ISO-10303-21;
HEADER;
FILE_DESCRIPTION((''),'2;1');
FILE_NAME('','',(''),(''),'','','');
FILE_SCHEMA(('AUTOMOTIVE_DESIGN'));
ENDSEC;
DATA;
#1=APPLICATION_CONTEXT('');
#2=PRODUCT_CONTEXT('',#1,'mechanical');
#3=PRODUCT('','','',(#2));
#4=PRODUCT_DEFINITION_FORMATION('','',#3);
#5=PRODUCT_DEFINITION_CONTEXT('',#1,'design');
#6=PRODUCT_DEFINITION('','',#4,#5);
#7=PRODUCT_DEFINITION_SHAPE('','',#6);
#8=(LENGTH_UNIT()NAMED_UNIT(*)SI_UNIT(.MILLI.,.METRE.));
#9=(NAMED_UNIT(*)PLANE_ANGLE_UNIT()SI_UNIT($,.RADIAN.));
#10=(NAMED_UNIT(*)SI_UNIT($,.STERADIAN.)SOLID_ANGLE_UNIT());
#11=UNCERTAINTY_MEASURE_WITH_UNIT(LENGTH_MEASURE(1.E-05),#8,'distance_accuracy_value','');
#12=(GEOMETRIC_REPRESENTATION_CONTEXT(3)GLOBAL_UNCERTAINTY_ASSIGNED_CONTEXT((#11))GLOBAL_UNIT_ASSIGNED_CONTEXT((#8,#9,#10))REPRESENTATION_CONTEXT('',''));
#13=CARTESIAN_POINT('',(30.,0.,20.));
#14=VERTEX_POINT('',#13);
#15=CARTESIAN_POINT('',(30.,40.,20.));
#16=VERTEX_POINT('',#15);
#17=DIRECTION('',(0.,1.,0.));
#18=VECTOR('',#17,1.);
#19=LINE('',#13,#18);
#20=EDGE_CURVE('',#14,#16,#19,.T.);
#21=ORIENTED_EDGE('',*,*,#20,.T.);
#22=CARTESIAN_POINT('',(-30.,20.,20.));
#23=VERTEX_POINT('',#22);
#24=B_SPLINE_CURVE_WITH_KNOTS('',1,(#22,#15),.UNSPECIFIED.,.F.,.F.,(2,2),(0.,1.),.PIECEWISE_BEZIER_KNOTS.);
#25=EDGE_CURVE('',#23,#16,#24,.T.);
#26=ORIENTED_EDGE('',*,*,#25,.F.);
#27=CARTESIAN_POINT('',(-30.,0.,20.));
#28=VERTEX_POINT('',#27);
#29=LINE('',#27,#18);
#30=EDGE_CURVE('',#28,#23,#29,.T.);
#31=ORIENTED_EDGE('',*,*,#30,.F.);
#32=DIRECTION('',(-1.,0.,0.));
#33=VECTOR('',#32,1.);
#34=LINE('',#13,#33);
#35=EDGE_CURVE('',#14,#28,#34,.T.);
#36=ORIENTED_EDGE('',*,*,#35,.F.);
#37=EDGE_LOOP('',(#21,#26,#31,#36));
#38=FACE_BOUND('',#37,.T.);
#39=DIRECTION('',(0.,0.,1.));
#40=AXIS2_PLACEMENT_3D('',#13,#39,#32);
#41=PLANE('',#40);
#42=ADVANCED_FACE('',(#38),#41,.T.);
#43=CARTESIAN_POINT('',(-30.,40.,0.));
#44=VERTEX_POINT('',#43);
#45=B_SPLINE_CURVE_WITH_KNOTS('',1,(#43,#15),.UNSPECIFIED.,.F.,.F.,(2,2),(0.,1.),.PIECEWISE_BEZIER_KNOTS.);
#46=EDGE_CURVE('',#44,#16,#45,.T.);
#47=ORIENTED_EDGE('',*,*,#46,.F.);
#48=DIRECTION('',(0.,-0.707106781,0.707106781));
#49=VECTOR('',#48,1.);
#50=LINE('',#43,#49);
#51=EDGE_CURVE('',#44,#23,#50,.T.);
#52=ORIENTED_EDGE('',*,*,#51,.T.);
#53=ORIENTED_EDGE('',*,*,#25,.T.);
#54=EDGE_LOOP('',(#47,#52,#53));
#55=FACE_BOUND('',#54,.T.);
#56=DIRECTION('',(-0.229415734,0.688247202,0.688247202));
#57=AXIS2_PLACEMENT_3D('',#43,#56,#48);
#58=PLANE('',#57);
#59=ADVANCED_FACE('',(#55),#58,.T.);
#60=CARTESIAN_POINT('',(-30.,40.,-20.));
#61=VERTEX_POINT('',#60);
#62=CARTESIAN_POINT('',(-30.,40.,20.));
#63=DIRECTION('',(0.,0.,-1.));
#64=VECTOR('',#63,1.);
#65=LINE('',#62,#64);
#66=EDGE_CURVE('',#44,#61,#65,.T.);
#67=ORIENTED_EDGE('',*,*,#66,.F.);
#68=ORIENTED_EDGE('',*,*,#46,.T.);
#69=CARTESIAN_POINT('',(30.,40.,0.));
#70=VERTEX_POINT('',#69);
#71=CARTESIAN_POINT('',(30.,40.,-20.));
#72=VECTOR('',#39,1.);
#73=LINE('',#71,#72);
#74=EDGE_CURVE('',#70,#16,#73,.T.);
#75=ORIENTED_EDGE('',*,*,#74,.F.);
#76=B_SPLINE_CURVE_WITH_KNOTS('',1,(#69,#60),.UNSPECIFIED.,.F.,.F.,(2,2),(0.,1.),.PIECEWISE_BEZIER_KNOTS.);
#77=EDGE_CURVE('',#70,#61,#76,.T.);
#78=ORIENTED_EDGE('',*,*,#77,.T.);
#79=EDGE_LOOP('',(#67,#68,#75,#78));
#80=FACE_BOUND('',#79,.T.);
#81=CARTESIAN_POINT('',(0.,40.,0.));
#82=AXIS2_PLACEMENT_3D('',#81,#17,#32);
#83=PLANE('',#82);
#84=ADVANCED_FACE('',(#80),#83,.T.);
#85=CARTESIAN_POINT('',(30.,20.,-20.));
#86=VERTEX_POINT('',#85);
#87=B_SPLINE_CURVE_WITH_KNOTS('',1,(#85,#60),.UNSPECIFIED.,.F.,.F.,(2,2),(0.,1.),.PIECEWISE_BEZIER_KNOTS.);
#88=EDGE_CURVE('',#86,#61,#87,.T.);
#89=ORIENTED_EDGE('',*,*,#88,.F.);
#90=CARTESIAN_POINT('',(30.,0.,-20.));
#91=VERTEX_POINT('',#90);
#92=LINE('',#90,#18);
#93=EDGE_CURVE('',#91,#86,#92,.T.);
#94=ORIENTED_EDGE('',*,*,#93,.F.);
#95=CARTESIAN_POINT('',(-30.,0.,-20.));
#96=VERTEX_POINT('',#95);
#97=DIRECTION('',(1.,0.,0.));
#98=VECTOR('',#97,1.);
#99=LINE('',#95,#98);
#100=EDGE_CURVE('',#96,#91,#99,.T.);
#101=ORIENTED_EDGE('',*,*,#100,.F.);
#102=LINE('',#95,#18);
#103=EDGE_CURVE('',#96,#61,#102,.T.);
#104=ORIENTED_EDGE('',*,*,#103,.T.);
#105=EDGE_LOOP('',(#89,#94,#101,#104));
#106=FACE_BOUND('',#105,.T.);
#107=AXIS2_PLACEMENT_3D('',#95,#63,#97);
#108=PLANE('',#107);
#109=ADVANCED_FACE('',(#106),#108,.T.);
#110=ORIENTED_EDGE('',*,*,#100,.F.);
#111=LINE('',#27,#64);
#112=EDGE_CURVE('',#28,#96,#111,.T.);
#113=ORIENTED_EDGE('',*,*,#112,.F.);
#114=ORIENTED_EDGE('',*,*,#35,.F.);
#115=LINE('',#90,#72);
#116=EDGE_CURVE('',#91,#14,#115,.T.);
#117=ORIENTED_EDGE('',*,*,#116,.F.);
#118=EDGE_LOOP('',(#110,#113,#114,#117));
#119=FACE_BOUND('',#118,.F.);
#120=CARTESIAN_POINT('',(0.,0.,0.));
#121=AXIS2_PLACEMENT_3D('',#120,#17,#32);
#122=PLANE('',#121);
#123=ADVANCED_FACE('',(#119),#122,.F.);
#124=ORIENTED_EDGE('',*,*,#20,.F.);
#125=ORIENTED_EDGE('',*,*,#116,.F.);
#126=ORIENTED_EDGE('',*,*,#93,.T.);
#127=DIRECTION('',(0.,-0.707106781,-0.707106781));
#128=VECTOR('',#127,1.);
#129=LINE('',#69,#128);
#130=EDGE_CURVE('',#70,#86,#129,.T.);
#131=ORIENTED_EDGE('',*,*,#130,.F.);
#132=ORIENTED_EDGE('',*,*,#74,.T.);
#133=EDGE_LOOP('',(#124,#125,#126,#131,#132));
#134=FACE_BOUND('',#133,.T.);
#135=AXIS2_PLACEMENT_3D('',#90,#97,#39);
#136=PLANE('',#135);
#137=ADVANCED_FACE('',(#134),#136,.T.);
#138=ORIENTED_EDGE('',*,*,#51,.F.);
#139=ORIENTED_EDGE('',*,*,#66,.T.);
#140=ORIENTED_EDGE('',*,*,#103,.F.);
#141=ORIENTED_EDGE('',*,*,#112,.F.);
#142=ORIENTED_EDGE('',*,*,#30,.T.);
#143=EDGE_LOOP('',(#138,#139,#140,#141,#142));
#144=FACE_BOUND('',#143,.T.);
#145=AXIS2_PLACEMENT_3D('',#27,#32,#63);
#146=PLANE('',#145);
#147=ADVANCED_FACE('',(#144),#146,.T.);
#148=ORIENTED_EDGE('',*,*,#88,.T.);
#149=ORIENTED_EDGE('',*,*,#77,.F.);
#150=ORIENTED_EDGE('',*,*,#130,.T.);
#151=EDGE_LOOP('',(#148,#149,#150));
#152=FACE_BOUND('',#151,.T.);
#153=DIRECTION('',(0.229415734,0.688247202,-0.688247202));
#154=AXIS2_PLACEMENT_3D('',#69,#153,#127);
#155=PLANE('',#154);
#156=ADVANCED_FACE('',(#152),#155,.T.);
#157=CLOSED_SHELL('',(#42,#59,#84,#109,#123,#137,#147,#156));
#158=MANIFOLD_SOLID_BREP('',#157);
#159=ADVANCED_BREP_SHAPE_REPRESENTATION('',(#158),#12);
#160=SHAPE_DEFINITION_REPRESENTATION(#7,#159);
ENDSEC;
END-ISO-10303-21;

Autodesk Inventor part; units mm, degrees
ref_plane "YZ Plane" through (0, 0, 0) normal (1, 0, 0) x (0, 1, 0)
ref_plane "XZ Plane" through (0, 0, 0) normal (0, 1, 0) x (-1, 0, 0)
ref_plane "XY Plane" through (0, 0, 0) normal (0, 0, 1) x (1, 0, 0)
sketch "草圖1" plane through (0, 0, 0) normal (0, 1, 0) x (-1, 0, 0)
  line L0 (-30, 20) -> (30, 20)
  line L1 (30, 20) -> (30, -20)
  line L2 (30, -20) -> (-30, -20)
  line L3 (-30, -20) -> (-30, 20)
  line L4 (-30, 20) -> (30, -20) construction
  line L5 (30, 20) -> (-30, -20) construction
  point P0 (0, 0)
  dimension "d0" = 40
  dimension "d1" = 60
extrude "擠出1" add sketch "草圖1" along normal blind 40
sketch "草圖2" plane through (-30, 0, -20) normal (-1, 0, 0) x (0, 0, 1)
  line L0 (40, 40) -> (0, 40) construction
  line L1 (20, 40) -> (40, 20)
  line L2 (40, 20) -> (40, 40)
  line L3 (40, 40) -> (20, 40)
  point P0 (20, 0)
  dimension "d4" = 20
loft "斷面混成1" cut profiles "草圖2" section 2 point at (30, 40, 20)
sketch "草圖4" plane through (30, 0, 20) normal (1, 0, 0) x (0, 0, -1)
  line L0 (0, 40) -> (40, 40) construction
  line L1 (40, 40) -> (40, 0) construction
  line L2 (40, 0) -> (0, 0) construction
  line L3 (0, 0) -> (0, 40) construction
  line L4 (0, 20) -> (20, 40) construction
  line L5 (20, 40) -> (40, 20)
  line L6 (40, 0) -> (40, 40) construction
  line L7 (40, 20) -> (40, 40)
  line L8 (40, 40) -> (20, 40) projected
  line L9 (40, 40) -> (20, 40)
  point P0 (20, 0)
  dimension "d9" = 20
loft "斷面混成2" cut profiles "草圖4" section 2 point at (-30, 40, -20)
properties part number "14" material "鋼、碳鋼"
